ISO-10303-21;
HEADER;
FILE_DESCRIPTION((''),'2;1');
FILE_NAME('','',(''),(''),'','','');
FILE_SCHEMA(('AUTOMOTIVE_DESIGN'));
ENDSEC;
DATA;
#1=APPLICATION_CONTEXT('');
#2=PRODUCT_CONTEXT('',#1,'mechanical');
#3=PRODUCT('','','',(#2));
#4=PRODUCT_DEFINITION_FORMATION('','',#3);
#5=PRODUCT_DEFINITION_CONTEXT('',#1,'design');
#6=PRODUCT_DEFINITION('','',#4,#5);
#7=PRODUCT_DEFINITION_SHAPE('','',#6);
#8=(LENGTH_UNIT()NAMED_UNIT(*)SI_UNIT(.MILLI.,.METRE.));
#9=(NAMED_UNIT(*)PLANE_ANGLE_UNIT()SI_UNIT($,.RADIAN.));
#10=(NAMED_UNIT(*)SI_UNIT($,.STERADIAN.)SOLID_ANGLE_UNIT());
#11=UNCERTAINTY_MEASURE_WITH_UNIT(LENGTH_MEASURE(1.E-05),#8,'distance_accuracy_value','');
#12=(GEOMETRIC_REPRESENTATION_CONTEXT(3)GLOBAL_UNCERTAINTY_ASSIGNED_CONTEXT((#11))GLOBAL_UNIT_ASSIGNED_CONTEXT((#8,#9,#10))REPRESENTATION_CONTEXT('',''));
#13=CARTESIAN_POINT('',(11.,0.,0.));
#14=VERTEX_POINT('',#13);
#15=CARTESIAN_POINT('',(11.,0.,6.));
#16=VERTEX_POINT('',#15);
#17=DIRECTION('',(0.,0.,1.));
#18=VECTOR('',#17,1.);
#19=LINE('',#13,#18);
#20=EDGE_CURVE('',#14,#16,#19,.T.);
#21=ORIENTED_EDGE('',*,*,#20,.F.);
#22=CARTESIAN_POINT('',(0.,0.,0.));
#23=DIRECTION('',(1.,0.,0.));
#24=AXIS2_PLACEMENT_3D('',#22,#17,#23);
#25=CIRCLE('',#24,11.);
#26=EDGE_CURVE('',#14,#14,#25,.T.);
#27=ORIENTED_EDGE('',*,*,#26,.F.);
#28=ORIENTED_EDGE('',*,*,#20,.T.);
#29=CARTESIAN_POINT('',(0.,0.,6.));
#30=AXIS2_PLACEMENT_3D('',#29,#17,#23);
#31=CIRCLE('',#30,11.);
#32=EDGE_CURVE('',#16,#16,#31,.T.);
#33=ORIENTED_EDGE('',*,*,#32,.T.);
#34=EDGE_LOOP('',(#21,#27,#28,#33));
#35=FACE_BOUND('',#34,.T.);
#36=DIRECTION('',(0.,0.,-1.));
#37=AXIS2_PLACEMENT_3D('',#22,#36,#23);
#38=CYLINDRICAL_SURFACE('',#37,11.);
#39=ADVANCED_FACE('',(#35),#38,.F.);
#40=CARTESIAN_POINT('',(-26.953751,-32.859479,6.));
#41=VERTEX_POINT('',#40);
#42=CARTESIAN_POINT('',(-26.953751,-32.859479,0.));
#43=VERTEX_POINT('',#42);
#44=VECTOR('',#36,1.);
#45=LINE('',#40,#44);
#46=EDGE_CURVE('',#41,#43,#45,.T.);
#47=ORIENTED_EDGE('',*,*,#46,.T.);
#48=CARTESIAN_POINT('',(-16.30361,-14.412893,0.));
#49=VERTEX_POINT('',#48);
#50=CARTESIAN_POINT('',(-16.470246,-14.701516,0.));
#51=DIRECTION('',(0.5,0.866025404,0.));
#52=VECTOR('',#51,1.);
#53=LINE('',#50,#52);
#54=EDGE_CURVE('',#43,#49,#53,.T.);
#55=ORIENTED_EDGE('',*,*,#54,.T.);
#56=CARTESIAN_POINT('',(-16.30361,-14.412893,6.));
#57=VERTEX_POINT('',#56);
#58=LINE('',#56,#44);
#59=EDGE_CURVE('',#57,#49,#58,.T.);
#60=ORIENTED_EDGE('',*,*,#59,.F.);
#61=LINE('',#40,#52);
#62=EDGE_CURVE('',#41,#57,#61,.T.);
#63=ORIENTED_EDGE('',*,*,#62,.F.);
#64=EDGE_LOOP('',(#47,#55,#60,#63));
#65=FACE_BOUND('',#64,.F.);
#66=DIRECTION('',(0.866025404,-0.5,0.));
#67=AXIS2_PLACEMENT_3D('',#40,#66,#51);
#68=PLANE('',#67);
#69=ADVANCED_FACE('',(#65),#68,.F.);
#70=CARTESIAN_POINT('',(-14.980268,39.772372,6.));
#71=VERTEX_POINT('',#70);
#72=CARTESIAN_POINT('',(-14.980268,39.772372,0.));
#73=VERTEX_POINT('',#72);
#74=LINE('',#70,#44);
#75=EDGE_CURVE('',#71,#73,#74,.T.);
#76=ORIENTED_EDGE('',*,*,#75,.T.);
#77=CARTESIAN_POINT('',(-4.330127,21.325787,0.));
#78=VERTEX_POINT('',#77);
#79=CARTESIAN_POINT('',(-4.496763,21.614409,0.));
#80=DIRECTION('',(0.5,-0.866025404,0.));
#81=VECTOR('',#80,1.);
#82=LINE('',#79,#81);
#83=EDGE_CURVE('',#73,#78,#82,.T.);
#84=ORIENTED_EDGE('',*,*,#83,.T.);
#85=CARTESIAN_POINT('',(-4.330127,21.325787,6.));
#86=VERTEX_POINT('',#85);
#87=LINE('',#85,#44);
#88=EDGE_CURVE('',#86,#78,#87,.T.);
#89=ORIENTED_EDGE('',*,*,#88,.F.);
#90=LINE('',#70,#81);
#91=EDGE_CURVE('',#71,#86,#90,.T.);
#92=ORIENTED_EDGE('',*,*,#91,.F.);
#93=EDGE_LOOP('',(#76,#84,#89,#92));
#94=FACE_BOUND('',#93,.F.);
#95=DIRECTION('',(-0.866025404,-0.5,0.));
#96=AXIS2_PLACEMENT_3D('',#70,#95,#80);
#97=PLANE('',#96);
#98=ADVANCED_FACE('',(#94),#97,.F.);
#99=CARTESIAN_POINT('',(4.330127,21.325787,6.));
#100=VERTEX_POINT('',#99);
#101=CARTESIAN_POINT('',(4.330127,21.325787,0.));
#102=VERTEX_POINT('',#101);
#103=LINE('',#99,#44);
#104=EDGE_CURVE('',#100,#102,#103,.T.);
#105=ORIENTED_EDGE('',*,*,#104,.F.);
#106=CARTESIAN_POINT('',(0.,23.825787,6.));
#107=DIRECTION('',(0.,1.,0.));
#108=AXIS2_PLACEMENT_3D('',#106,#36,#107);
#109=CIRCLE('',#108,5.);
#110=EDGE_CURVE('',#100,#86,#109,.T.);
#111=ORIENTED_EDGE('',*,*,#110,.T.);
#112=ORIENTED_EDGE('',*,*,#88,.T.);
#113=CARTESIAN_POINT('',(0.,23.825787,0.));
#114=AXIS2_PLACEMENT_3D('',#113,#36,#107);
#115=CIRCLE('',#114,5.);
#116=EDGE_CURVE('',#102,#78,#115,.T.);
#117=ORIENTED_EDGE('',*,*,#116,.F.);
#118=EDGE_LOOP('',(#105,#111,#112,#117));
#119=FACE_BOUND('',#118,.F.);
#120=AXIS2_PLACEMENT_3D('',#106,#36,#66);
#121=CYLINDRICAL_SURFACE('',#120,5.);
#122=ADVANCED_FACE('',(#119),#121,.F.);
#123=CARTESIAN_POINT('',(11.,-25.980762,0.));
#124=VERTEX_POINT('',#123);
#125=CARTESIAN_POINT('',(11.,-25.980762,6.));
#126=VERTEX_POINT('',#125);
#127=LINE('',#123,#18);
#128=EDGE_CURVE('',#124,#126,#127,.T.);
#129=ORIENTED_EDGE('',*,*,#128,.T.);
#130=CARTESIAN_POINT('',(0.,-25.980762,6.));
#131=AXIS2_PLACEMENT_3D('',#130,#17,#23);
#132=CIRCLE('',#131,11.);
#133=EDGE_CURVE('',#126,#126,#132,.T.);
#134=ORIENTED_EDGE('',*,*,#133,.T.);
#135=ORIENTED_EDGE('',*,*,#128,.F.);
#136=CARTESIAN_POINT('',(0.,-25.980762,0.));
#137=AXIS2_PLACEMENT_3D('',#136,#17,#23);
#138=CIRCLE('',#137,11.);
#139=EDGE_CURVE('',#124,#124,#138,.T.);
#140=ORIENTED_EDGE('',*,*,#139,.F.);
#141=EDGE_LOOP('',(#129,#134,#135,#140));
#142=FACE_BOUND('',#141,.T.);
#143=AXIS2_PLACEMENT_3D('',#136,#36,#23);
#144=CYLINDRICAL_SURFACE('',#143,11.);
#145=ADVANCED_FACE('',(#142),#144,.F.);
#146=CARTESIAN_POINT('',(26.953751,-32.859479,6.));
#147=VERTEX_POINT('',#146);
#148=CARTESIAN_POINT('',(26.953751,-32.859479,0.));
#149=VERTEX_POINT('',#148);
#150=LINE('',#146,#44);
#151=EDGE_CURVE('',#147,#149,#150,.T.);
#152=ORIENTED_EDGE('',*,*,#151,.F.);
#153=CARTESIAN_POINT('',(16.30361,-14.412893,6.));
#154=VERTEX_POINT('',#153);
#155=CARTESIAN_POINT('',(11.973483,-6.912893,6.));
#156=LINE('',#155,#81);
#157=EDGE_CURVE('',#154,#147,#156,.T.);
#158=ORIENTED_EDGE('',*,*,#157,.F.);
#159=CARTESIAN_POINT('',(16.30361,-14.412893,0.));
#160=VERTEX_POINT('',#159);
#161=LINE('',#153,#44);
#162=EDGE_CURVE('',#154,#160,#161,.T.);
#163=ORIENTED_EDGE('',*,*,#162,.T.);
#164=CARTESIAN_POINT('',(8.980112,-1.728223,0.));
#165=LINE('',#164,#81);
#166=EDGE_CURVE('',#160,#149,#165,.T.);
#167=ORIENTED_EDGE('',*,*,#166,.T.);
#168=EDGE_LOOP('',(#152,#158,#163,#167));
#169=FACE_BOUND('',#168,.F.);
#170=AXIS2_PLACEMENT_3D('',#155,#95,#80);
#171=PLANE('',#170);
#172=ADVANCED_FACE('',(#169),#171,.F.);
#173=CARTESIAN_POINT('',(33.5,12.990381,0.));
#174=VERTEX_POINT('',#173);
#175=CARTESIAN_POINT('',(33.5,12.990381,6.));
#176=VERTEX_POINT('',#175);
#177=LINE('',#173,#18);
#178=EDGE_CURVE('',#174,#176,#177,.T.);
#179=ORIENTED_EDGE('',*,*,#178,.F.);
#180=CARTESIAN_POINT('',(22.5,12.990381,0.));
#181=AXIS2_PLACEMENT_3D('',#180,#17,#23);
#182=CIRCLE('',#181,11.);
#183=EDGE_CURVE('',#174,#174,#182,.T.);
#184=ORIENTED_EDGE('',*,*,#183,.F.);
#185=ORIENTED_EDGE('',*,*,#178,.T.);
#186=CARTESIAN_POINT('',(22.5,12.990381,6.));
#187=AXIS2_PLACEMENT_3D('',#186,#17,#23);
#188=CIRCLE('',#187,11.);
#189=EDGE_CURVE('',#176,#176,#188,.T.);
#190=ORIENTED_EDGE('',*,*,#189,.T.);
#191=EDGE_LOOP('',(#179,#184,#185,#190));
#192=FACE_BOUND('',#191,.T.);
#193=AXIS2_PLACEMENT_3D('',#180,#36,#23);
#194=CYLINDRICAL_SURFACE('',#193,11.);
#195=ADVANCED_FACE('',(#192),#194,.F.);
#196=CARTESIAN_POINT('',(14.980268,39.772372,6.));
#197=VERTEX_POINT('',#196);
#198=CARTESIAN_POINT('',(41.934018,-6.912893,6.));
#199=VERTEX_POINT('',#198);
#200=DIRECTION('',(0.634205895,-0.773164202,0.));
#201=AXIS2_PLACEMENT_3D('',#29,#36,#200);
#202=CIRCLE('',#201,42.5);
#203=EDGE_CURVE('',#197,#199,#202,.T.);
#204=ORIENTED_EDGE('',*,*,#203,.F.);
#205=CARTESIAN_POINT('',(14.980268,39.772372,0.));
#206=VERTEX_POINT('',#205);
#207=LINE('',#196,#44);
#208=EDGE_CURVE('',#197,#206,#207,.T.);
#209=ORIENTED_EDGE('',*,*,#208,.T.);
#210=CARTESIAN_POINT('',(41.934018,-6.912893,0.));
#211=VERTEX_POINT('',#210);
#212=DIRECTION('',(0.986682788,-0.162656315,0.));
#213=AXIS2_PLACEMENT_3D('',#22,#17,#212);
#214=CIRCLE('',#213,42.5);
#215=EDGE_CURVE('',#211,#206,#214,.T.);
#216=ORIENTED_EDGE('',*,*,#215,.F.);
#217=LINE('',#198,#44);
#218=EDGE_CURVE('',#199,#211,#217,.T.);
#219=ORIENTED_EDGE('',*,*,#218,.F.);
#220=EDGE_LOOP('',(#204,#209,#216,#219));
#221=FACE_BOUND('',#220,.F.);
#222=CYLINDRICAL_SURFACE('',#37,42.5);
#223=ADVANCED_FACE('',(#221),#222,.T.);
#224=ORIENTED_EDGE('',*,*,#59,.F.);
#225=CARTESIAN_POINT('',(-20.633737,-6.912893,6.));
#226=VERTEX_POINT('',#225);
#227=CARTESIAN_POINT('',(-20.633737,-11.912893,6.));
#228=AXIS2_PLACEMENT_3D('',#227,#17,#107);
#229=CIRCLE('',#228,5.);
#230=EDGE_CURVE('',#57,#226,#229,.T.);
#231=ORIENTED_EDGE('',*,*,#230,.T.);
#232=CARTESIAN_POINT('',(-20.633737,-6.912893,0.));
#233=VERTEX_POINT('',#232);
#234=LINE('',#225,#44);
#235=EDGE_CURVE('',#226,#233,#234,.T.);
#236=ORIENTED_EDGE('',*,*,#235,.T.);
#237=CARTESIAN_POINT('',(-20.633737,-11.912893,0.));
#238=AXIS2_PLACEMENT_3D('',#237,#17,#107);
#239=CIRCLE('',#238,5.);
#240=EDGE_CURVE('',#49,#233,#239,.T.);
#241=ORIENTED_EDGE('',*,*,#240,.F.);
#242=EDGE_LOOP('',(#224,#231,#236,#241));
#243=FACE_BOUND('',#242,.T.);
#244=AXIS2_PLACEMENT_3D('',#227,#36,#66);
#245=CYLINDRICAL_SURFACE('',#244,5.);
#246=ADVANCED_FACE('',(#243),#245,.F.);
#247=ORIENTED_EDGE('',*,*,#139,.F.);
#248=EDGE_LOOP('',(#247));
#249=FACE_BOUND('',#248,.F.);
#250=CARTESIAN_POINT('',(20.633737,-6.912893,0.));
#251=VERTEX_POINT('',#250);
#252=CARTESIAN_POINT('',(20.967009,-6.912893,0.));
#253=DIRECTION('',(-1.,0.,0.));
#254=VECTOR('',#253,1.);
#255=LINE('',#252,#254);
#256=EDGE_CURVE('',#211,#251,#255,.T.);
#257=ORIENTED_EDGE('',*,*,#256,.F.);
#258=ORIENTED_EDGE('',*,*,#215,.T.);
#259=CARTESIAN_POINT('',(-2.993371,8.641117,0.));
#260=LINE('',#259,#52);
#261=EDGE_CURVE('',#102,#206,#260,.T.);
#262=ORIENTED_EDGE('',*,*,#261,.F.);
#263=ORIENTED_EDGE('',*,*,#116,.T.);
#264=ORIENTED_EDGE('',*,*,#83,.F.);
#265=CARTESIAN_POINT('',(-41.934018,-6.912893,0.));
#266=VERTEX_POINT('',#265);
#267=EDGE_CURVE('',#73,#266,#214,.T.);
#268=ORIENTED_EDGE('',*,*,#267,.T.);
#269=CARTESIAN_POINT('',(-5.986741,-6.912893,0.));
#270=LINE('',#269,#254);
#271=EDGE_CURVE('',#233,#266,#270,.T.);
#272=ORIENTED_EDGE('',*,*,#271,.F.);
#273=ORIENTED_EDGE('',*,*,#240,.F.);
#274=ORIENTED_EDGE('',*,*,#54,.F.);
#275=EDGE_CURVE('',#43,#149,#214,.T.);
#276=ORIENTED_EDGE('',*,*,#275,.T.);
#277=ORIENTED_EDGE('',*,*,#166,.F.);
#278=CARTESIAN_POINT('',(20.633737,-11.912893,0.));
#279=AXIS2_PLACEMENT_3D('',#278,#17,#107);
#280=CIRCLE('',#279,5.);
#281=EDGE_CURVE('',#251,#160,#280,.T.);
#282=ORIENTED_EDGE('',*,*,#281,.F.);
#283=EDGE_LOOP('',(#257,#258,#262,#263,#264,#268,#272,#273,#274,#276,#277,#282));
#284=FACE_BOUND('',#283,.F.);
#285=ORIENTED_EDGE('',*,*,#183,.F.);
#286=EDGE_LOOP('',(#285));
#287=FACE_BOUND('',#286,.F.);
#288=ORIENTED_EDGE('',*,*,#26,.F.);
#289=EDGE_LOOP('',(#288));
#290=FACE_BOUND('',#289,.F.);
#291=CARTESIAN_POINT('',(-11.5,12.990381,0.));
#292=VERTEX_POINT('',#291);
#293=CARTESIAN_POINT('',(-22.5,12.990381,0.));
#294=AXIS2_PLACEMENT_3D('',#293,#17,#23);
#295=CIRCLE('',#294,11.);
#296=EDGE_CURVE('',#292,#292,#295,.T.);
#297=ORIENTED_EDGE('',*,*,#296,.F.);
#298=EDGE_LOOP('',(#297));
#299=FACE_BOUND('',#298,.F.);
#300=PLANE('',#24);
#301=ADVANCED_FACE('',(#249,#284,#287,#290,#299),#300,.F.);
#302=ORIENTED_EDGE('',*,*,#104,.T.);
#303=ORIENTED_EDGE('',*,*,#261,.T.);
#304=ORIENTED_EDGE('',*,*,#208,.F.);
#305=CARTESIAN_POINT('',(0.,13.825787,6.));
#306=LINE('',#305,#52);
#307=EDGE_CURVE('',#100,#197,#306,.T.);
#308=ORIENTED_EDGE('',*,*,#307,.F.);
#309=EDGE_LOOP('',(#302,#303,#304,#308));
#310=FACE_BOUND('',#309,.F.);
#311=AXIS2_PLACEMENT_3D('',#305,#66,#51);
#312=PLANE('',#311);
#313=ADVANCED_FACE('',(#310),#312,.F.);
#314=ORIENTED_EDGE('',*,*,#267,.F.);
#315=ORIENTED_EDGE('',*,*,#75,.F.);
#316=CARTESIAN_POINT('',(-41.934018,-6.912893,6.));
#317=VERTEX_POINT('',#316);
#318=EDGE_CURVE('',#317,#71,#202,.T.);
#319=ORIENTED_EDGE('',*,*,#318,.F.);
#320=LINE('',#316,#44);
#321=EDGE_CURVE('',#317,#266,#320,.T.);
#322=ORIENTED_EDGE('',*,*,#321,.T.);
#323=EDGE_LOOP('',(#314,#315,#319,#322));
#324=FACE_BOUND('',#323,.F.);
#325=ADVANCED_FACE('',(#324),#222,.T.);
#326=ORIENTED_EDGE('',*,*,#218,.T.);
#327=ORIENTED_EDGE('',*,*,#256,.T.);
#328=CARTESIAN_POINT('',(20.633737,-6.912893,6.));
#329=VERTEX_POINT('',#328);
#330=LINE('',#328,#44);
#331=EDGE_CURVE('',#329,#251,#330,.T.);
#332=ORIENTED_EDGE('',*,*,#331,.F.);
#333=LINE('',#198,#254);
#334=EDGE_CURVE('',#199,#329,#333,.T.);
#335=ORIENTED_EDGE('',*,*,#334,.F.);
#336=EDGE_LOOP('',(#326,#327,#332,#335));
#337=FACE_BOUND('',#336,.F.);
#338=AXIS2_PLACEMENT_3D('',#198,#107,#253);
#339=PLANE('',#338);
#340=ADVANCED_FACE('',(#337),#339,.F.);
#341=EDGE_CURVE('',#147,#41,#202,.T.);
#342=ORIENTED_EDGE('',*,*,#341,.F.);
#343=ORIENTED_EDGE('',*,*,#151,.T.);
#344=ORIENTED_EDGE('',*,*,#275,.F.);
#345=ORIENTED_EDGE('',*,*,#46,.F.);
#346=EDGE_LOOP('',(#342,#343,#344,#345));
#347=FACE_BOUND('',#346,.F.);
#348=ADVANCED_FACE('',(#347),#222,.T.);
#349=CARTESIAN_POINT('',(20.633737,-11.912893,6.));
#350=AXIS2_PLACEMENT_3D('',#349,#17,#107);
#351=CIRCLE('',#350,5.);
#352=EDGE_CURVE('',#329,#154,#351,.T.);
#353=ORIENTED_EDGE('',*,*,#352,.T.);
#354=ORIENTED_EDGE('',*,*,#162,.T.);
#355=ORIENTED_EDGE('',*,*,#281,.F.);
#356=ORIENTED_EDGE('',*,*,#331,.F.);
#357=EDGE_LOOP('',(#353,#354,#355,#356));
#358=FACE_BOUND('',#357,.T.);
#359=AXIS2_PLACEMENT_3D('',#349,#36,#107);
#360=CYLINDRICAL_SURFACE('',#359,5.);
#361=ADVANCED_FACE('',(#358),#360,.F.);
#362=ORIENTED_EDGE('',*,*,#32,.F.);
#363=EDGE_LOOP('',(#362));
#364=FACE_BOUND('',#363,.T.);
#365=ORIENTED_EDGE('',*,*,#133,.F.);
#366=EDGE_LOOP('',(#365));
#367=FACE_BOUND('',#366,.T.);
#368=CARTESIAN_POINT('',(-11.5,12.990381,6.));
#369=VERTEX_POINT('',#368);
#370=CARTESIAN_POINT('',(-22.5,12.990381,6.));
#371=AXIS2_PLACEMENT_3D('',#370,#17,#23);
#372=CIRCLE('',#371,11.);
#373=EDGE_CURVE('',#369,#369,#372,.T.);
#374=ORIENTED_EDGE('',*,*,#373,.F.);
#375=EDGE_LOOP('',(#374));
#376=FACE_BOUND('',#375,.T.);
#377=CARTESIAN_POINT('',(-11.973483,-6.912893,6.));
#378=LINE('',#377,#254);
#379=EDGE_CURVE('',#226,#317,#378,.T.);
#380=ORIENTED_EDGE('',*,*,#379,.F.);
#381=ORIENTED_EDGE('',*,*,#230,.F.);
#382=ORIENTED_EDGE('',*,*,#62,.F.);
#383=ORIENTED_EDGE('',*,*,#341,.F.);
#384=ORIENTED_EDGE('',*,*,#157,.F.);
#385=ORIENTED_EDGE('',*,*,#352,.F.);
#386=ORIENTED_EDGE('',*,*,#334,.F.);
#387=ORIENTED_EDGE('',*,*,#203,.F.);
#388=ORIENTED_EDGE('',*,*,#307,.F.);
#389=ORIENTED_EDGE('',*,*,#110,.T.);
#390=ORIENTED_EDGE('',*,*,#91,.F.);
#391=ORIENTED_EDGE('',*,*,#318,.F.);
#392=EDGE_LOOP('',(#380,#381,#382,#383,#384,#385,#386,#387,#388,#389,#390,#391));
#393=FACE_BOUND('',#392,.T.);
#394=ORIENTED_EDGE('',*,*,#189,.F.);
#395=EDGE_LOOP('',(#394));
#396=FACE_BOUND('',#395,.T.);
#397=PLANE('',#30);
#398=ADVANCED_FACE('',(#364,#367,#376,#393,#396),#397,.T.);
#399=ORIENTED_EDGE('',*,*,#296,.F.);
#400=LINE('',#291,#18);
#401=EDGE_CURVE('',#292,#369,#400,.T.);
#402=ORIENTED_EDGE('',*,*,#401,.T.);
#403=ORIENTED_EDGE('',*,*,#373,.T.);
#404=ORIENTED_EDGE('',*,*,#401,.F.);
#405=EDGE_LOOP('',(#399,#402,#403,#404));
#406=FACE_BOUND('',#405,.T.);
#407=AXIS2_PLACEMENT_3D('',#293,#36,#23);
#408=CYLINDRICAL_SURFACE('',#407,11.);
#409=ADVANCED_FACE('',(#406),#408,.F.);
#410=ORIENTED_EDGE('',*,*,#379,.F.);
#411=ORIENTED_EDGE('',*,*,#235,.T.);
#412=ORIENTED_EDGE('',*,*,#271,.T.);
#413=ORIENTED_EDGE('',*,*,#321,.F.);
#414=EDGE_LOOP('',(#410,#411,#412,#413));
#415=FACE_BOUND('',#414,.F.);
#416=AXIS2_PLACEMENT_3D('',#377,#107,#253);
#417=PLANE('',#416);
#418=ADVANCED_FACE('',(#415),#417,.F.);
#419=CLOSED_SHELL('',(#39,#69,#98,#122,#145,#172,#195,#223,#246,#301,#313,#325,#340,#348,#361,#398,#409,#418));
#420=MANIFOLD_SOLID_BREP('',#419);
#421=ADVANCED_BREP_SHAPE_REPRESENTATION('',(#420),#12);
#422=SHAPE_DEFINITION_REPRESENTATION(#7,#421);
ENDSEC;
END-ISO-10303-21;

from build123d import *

# Parameters (mm, degrees)
F0_R            = 42.5
F0_R_2          = 11
F1_DEPTH        = 6
F3_DEPTH        = 25
F3_COPIES_COUNT = 3
F4_R            = 5


# Not quite as in the source:
# - a pattern or mirror of a feature is missing from the dataset's text; its kind, count and spacing are read off the source's solid


with BuildPart() as f1:
    # F0 (on Top) → F1 (new body)
    with BuildSketch(Plane.XY):
        Circle(F0_R)
        with Locations((0, -25.9807621135)):
            Circle(F0_R_2, mode=Mode.SUBTRACT)
        with Locations((-22.5, 12.9903810568)):
            Circle(F0_R_2, mode=Mode.SUBTRACT)
        Circle(F0_R_2, mode=Mode.SUBTRACT)
        with Locations((22.5, 12.9903810568)):
            Circle(F0_R_2, mode=Mode.SUBTRACT)
    extrude(amount=F1_DEPTH)

    # F2 (on face) → F3 (cut)
    with BuildSketch(Plane.XY.offset(6)):
        with BuildLine():
            Line((11.9734825652, -6.9128933822), (26.9537505179, -32.8594785872))
            ThreePointArc((26.9537505179, -32.8594785872), (36.8060796608, -21.25), (41.9340184705, -6.9128933822))
            Line((41.9340184705, -6.9128933822), (11.9734825652, -6.9128933822))
        make_face()
    f3 = extrude(amount=-F3_DEPTH, mode=Mode.SUBTRACT)

    # F3_copies: F3 ×3 about axis
    f3_copies_axis = Axis((0, 0, 0), (0, 0, 1))
    for i in range(1, F3_COPIES_COUNT):
        add(f3.rotate(f3_copies_axis, i * 360 / F3_COPIES_COUNT), mode=Mode.SUBTRACT)

    # F4
    f4_edges = [f1.edges().sort_by_distance(p)[0] for p in [
        (11.973483, -6.912893, 3),
        (0, 13.825787, 3),
        (-11.973483, -6.912893, 3),
    ]]
    fillet(f4_edges, radius=F4_R)


solid = f1.part
